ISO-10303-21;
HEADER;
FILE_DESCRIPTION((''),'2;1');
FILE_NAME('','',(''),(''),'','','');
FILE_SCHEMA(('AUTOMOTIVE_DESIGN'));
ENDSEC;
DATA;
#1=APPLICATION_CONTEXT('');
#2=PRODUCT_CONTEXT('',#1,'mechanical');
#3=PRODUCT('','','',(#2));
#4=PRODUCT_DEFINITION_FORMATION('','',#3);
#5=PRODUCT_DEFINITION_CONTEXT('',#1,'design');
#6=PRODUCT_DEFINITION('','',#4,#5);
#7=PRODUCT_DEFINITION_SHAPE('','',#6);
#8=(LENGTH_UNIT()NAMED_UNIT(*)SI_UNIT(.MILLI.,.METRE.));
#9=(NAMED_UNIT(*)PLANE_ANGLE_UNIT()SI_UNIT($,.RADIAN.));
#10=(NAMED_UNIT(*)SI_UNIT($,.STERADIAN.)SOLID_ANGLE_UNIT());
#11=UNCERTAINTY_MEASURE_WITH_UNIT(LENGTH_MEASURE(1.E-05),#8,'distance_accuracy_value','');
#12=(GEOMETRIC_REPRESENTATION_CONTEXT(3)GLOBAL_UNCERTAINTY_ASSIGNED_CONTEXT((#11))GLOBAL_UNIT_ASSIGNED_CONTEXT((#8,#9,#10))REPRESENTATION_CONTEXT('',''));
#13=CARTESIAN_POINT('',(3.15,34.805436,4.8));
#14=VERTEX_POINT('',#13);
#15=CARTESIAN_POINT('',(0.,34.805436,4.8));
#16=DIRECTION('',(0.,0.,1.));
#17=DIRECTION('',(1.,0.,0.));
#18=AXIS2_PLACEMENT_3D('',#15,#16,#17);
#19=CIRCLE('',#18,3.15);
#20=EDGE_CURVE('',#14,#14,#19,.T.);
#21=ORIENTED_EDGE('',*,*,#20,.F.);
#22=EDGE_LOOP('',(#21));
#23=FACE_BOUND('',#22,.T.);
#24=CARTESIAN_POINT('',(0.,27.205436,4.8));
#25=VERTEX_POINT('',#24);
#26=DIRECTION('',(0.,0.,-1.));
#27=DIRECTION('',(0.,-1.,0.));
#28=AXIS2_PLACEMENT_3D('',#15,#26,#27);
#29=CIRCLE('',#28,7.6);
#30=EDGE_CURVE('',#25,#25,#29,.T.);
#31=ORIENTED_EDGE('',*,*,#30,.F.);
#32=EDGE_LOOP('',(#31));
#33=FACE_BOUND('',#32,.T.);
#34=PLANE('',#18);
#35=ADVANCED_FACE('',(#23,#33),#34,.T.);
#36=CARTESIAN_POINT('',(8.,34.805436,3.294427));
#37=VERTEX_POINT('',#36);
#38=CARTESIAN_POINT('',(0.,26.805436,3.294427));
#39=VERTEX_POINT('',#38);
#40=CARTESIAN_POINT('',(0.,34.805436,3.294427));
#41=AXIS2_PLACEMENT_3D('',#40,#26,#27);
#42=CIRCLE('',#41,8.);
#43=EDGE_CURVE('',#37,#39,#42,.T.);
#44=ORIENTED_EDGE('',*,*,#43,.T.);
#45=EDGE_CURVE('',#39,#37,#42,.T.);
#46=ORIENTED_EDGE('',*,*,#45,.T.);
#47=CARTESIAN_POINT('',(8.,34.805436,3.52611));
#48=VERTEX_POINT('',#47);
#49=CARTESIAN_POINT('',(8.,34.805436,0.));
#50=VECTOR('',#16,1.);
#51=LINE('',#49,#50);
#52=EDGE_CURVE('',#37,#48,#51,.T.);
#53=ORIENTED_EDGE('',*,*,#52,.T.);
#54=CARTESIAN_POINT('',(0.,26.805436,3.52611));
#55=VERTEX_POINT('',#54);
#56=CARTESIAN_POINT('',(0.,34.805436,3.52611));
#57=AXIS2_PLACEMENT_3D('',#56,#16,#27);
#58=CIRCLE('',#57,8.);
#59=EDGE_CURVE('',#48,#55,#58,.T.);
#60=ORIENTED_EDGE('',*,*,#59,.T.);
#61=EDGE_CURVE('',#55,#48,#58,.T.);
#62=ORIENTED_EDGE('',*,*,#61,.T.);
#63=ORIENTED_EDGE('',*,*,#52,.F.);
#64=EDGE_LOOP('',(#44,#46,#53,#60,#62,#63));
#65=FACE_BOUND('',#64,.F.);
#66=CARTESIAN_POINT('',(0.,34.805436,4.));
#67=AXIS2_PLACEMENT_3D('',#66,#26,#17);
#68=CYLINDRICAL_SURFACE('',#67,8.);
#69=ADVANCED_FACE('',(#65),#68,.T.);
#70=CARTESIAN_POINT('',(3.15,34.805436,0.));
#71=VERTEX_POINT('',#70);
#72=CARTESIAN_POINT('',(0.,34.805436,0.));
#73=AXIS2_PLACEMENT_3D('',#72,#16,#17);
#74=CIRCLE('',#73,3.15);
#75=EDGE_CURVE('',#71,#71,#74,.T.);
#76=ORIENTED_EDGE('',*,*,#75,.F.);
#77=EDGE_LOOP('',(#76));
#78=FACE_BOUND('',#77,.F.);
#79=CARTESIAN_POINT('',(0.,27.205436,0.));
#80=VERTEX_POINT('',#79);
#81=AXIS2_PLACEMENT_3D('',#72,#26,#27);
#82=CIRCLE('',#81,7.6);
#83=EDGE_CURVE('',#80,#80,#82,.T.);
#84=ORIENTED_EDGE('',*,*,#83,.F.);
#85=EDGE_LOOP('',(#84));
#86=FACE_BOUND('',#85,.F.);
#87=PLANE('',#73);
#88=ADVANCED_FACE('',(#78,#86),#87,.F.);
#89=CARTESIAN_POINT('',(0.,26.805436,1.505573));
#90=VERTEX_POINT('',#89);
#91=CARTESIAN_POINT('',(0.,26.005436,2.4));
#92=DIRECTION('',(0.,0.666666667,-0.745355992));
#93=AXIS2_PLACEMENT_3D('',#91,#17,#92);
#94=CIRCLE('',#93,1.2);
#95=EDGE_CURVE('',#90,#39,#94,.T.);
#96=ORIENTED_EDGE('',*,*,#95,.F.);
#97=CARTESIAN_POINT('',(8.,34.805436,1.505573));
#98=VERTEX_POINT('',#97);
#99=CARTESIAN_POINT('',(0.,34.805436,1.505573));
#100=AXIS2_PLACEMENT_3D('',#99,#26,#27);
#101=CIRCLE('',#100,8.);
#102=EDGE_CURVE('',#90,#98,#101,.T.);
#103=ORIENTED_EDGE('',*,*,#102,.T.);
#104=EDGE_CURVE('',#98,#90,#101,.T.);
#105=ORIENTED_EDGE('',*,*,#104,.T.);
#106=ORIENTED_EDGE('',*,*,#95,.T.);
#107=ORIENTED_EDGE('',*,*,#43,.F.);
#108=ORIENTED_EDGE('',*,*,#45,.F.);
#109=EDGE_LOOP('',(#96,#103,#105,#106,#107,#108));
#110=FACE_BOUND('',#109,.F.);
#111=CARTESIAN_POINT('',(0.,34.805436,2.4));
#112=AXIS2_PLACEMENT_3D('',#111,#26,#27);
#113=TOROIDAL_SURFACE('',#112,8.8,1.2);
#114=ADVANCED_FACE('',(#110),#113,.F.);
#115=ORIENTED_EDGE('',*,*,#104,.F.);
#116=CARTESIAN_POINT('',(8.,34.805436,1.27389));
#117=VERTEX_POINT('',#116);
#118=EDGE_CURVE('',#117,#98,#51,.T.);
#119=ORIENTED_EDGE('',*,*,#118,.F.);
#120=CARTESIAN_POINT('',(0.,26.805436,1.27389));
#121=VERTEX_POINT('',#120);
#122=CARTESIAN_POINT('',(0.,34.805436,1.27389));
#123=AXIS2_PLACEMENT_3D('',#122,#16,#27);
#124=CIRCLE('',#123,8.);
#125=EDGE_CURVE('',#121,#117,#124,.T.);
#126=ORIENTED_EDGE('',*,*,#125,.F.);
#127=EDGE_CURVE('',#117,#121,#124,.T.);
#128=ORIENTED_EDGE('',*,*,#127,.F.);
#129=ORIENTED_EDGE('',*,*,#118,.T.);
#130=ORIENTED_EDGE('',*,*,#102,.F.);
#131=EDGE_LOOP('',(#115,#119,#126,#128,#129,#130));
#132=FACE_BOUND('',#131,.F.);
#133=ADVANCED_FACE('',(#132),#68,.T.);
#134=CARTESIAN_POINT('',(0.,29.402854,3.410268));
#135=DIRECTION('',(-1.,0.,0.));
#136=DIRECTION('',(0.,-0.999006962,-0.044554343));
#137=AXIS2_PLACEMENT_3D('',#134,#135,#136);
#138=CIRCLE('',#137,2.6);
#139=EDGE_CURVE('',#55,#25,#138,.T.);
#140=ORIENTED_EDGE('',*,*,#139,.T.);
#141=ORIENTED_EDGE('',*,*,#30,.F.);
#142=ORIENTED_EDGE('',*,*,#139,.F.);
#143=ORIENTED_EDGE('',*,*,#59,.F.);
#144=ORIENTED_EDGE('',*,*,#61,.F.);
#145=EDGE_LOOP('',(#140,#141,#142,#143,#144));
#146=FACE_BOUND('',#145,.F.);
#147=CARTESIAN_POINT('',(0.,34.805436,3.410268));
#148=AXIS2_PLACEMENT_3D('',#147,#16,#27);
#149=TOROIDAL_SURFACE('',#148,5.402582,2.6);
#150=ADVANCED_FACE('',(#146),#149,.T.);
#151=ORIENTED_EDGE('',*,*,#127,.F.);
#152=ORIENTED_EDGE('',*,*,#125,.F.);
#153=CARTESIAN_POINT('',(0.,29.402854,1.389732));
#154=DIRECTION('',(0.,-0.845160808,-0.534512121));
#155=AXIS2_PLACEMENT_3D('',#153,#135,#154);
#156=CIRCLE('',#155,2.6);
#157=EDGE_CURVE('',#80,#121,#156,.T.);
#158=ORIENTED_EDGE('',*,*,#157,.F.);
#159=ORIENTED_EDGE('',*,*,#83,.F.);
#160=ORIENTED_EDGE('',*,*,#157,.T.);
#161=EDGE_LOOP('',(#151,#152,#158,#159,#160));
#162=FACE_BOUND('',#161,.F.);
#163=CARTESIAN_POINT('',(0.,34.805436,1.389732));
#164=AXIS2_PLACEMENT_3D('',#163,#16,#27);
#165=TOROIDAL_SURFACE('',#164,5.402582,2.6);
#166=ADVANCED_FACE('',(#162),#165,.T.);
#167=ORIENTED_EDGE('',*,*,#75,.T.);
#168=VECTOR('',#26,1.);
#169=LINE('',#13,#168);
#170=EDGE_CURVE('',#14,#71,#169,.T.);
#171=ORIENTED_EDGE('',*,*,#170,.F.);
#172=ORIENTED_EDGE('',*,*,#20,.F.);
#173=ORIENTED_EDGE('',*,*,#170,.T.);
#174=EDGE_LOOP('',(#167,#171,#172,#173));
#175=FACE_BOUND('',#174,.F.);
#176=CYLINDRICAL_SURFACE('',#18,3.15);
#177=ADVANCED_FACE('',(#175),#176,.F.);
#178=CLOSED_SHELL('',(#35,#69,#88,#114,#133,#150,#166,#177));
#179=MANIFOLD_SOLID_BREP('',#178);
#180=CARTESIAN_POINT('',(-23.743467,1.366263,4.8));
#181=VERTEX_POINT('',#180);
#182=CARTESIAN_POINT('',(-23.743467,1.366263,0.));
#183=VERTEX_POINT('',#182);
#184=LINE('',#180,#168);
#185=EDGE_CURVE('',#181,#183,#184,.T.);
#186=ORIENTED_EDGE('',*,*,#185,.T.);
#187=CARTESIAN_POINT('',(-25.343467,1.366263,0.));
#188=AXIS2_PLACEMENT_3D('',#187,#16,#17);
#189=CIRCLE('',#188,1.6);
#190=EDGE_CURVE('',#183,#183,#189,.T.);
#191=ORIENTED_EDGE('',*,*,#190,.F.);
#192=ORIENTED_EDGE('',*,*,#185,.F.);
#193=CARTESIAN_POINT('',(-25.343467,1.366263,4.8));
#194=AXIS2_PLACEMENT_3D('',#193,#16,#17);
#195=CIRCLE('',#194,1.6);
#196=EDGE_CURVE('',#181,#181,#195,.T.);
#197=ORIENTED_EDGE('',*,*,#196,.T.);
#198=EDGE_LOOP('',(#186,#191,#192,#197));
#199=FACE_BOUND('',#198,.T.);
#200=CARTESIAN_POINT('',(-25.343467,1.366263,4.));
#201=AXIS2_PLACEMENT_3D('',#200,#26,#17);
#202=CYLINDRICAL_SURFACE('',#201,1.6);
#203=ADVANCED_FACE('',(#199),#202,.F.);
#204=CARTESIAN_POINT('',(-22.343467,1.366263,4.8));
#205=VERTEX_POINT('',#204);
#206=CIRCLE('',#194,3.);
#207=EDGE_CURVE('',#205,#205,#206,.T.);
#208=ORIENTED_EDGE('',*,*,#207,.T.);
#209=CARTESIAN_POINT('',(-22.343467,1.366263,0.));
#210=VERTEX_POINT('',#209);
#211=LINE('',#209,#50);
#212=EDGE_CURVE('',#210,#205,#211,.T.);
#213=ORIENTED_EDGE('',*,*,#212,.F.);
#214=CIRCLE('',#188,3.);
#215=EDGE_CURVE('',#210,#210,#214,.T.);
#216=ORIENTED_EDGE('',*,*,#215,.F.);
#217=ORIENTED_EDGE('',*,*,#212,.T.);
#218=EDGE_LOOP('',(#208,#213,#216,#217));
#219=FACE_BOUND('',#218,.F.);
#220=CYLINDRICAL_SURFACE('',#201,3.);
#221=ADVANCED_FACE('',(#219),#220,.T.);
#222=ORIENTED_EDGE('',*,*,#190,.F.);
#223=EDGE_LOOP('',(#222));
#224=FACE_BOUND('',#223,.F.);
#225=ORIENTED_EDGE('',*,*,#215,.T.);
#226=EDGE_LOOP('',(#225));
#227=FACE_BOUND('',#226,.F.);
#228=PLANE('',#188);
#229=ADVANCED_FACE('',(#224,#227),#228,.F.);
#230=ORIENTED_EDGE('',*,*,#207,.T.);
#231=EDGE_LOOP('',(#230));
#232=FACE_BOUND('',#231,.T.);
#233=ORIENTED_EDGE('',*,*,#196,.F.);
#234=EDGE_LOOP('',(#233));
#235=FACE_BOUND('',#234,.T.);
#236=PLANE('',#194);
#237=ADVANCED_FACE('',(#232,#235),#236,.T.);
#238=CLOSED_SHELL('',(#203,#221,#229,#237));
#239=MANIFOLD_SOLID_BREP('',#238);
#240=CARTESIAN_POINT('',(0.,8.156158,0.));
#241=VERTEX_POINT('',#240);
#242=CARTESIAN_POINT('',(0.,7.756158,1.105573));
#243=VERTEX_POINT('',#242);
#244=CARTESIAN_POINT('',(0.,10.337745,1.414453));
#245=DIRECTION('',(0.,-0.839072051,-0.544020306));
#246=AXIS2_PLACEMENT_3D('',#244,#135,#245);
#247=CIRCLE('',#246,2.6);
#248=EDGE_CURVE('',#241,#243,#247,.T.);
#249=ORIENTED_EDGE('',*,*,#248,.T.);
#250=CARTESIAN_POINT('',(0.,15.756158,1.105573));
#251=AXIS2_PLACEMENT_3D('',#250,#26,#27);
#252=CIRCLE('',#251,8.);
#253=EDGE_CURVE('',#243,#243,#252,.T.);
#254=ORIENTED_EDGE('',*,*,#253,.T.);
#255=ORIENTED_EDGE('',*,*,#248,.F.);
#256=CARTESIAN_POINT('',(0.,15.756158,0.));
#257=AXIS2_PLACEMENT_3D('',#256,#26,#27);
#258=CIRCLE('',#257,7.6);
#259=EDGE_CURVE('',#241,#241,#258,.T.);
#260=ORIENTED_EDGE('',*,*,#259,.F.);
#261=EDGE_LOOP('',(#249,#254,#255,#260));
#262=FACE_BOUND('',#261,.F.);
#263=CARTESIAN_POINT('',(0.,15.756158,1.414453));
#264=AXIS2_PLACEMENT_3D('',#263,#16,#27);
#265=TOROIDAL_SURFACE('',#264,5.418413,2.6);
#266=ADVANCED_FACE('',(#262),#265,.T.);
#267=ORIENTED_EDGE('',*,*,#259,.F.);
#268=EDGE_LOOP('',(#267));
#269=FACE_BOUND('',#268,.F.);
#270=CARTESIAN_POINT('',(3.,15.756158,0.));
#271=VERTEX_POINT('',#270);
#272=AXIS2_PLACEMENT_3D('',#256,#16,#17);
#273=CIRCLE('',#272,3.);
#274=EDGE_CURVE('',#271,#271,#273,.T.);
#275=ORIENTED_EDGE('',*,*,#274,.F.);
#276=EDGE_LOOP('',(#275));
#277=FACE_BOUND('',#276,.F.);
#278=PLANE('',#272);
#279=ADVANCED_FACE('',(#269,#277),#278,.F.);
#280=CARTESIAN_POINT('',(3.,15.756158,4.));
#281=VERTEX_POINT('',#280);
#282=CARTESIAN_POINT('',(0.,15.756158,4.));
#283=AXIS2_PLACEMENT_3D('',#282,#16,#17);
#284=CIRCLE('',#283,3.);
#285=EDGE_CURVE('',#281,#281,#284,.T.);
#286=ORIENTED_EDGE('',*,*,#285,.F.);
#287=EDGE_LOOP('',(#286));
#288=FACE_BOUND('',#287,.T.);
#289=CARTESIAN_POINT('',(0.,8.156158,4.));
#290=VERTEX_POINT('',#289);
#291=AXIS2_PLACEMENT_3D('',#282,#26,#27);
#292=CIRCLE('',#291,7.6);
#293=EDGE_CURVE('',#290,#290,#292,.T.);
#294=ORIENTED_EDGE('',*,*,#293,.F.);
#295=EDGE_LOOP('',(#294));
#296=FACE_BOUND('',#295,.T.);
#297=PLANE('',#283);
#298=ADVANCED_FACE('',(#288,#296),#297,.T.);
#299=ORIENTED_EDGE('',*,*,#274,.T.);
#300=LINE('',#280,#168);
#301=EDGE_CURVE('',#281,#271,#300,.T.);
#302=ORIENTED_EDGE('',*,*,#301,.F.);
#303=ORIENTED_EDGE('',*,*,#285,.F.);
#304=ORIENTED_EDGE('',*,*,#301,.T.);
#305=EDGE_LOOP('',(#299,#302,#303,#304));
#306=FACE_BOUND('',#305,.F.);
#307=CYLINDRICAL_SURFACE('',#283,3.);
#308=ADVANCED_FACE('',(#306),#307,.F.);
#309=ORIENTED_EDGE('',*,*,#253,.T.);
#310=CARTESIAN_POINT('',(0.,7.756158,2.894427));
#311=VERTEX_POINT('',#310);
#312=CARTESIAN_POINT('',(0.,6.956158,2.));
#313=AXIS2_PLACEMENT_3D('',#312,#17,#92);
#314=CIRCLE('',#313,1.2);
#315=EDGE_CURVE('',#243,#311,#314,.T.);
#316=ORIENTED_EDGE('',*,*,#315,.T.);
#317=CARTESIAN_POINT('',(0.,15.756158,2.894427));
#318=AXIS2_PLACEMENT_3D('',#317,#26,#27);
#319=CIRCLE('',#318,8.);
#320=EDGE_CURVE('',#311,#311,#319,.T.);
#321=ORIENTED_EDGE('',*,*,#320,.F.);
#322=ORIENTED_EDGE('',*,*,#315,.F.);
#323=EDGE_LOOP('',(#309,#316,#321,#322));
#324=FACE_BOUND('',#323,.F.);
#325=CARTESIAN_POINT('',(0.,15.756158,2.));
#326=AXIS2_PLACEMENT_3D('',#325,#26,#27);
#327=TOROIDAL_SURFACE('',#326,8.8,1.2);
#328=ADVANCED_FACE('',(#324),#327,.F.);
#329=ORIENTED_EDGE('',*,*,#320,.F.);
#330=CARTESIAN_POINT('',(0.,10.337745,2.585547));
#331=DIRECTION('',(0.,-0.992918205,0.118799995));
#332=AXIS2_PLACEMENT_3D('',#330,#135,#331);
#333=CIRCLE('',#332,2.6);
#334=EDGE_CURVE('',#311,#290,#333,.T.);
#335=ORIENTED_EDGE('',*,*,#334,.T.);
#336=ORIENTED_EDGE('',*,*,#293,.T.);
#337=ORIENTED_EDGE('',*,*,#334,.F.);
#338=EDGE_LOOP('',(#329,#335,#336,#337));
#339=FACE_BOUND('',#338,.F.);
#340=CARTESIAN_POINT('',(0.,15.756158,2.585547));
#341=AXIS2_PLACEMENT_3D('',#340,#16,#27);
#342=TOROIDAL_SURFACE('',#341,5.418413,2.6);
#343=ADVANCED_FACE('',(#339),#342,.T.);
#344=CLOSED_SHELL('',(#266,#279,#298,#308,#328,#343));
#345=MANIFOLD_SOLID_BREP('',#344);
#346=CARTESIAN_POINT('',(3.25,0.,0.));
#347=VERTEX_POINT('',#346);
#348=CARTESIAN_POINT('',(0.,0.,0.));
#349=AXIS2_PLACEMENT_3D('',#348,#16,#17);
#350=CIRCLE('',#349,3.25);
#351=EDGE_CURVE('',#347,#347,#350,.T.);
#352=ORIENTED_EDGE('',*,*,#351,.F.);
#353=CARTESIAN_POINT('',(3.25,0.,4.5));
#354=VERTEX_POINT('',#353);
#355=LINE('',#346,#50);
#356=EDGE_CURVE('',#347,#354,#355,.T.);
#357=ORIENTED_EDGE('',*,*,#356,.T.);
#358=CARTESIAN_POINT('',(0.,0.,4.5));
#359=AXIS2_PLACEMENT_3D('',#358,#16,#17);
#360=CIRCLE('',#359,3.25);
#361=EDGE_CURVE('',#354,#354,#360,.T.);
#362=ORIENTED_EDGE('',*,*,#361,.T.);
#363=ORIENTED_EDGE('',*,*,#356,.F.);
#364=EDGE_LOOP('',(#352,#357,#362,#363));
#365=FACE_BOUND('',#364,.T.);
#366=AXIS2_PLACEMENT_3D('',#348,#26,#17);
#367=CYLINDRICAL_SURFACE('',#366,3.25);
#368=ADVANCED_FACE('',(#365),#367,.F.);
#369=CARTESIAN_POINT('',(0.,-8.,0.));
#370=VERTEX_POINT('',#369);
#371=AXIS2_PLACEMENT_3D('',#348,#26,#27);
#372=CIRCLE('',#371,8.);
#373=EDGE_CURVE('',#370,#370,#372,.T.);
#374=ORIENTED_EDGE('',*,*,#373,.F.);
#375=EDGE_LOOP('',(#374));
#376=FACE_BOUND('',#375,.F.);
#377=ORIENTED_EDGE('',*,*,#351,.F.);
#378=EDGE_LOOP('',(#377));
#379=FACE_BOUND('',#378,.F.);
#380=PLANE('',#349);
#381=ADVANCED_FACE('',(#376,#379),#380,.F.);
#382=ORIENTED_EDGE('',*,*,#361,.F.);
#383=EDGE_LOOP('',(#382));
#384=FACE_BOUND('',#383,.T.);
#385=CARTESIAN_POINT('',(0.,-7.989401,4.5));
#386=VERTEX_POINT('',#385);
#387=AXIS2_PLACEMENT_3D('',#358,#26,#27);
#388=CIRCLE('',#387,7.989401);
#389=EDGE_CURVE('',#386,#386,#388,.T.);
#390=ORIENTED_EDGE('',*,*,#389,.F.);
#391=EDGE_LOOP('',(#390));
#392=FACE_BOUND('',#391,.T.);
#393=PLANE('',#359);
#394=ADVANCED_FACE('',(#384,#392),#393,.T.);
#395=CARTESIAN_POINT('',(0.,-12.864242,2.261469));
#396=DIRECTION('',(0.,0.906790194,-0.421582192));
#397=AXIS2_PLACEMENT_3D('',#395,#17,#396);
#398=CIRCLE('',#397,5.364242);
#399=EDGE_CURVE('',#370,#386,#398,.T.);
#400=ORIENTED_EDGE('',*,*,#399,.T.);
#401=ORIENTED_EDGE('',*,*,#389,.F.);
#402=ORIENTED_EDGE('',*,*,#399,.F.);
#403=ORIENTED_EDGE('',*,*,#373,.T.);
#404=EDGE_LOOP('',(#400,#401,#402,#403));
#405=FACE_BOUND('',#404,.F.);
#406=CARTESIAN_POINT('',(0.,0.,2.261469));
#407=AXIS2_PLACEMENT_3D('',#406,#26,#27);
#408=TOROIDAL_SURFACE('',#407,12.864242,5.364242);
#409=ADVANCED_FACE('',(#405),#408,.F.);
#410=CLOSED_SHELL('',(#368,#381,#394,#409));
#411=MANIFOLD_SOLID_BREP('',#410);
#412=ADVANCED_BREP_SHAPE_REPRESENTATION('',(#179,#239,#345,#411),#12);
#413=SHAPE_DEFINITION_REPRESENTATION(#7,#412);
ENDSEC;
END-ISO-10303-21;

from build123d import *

# Parameters (mm, degrees)
F0_R           = 3
F0_R_2         = 1.6
F1_DEPTH       = 4
F0_R_3         = 8
F2_DEPTH       = 0.8
F3_R           = 3
F4_DEPTH       = 25
F4_DEPTH_BACK  = 25
F11_DEPTH      = 0.8
F12_R          = 3.15
F13_DEPTH      = 25
F13_DEPTH_BACK = 25
F14_R          = 8
F14_R_2        = 3.25
F15_DEPTH      = 4.5


with BuildPart() as f1:
    # F0 (on Top) → F1 (new body)
    with BuildSketch(Plane.XY):
        with Locations((-25.3434665501, 1.3662634883)):
            Circle(F0_R)
        with Locations((-25.3434665501, 1.3662634883)):
            Circle(F0_R_2, mode=Mode.SUBTRACT)
    extrude(amount=F1_DEPTH)

    # F11 (add): a face of the model
    f11_faces = [f1.faces().sort_by_distance(p)[0] for p in [
        (-28.2586137364, 1.3662634883, 4),
    ]]
    extrude(f11_faces, amount=F11_DEPTH)


with BuildPart() as f1b:
    # F0 (on Top) → F1, piece 2 (new body)
    with BuildSketch(Plane.XY):
        with Locations((0, 15.7561581582)):
            Circle(F0_R_3)
    extrude(amount=F1_DEPTH)


with BuildPart() as f1c:
    # F0 (on Top) → F1, piece 3 (new body)
    with BuildSketch(Plane.XY):
        with Locations((0, 34.8054356873)):
            Circle(F0_R_3)
    extrude(amount=F1_DEPTH)

    # F2 (add): a face of the model
    f2_faces = [f1c.faces().sort_by_distance(p)[0] for p in [
        (0, 34.8054356873, 4),
    ]]
    extrude(f2_faces, amount=F2_DEPTH)


with BuildPart() as f4_tool:
    # F3 (on face) → F4 (new body, two sides)
    with BuildSketch(Plane.XY.offset(4)) as f4_sk:
        with Locations((0, 15.7561581582)):
            Circle(F3_R)
        with Locations((0, 34.8054356873)):
            Circle(F3_R)
    extrude(amount=-F4_DEPTH)
    extrude(f4_sk.sketch, amount=F4_DEPTH_BACK)


with BuildPart() as f1b_1:
    add(f1b.part)

    # F4: cut by f4_tool
    add(f4_tool.part, mode=Mode.SUBTRACT)

    # F6 (on Right) → F7 (revolve, cut)
    with BuildSketch(Plane.YZ):
        with BuildLine():
            ThreePointArc((8.1561581582, 0), (7.8928465089, 0.5298800346), (7.7561581582, 1.105572809))
            ThreePointArc((7.7561581582, 1.105572809), (8.1561581582, 2), (7.7561581582, 2.894427191))
            ThreePointArc((7.7561581582, 2.894427191), (7.8928465089, 3.4701199654), (8.1561581582, 4))
            Line((8.1561581582, 4), (7.7561581582, 4))
            Line((7.7561581582, 4), (1.3885094086, 4))
            Line((1.3885094086, 4), (1.3885094086, 0))
            Line((1.3885094086, 0), (8.1561581582, 0))
        make_face()
    revolve(axis=Axis((0, 15.7561581582, 3), (0, 0, -1)), mode=Mode.SUBTRACT)


with BuildPart() as f1c_1:
    add(f1c.part)

    # F4: cut by f4_tool
    add(f4_tool.part, mode=Mode.SUBTRACT)

    # F9 (on Right) → F10 (revolve, cut)
    with BuildSketch(Plane.YZ):
        with BuildLine():
            ThreePointArc((27.2054356873, 0), (26.8900265118, 0.7221245395), (26.8054356873, 1.505572809))
            ThreePointArc((26.8054356873, 1.505572809), (27.2054356873, 2.4), (26.8054356873, 3.294427191))
            ThreePointArc((26.8054356873, 3.294427191), (26.8900265118, 4.0778754605), (27.2054356873, 4.8))
            ThreePointArc((27.2054356873, 4.8), (9.199474241, 2.4), (27.2054356873, 0))
        make_face()
    revolve(axis=Axis((0, 34.8054356873, 3.6), (0, 0, -1)), mode=Mode.SUBTRACT)

    # F12 (on face) → F13 (cut, two sides)
    with BuildSketch(Plane.XY.offset(4.8)) as f13_sk:
        with Locations((0, 34.8054356873)):
            Circle(F12_R)
        with Locations((0, 15.7561581582)):
            Circle(F12_R)
    extrude(amount=-F13_DEPTH, mode=Mode.SUBTRACT)
    extrude(f13_sk.sketch, amount=F13_DEPTH_BACK, mode=Mode.SUBTRACT)


with BuildPart() as f15:
    # F14 (on Top) → F15 (new body)
    with BuildSketch(Plane.XY):
        Circle(F14_R)
        Circle(F14_R_2, mode=Mode.SUBTRACT)
    extrude(amount=F15_DEPTH)

    # F16 (on Right) → F17 (revolve, cut)
    with BuildSketch(Plane.YZ):
        with BuildLine():
            ThreePointArc((-8, 4.5229381791), (-17.8737479846, 2.2614690895), (-8, 0))
            ThreePointArc((-8, 0), (-7.5, 2.2614690895), (-8, 4.5229381791))
        make_face()
    revolve(axis=Axis((0, 0, 2.25), (0, 0, -1)), mode=Mode.SUBTRACT)


solid = Compound([f1.part, f1b_1.part, f1c_1.part, f15.part])
